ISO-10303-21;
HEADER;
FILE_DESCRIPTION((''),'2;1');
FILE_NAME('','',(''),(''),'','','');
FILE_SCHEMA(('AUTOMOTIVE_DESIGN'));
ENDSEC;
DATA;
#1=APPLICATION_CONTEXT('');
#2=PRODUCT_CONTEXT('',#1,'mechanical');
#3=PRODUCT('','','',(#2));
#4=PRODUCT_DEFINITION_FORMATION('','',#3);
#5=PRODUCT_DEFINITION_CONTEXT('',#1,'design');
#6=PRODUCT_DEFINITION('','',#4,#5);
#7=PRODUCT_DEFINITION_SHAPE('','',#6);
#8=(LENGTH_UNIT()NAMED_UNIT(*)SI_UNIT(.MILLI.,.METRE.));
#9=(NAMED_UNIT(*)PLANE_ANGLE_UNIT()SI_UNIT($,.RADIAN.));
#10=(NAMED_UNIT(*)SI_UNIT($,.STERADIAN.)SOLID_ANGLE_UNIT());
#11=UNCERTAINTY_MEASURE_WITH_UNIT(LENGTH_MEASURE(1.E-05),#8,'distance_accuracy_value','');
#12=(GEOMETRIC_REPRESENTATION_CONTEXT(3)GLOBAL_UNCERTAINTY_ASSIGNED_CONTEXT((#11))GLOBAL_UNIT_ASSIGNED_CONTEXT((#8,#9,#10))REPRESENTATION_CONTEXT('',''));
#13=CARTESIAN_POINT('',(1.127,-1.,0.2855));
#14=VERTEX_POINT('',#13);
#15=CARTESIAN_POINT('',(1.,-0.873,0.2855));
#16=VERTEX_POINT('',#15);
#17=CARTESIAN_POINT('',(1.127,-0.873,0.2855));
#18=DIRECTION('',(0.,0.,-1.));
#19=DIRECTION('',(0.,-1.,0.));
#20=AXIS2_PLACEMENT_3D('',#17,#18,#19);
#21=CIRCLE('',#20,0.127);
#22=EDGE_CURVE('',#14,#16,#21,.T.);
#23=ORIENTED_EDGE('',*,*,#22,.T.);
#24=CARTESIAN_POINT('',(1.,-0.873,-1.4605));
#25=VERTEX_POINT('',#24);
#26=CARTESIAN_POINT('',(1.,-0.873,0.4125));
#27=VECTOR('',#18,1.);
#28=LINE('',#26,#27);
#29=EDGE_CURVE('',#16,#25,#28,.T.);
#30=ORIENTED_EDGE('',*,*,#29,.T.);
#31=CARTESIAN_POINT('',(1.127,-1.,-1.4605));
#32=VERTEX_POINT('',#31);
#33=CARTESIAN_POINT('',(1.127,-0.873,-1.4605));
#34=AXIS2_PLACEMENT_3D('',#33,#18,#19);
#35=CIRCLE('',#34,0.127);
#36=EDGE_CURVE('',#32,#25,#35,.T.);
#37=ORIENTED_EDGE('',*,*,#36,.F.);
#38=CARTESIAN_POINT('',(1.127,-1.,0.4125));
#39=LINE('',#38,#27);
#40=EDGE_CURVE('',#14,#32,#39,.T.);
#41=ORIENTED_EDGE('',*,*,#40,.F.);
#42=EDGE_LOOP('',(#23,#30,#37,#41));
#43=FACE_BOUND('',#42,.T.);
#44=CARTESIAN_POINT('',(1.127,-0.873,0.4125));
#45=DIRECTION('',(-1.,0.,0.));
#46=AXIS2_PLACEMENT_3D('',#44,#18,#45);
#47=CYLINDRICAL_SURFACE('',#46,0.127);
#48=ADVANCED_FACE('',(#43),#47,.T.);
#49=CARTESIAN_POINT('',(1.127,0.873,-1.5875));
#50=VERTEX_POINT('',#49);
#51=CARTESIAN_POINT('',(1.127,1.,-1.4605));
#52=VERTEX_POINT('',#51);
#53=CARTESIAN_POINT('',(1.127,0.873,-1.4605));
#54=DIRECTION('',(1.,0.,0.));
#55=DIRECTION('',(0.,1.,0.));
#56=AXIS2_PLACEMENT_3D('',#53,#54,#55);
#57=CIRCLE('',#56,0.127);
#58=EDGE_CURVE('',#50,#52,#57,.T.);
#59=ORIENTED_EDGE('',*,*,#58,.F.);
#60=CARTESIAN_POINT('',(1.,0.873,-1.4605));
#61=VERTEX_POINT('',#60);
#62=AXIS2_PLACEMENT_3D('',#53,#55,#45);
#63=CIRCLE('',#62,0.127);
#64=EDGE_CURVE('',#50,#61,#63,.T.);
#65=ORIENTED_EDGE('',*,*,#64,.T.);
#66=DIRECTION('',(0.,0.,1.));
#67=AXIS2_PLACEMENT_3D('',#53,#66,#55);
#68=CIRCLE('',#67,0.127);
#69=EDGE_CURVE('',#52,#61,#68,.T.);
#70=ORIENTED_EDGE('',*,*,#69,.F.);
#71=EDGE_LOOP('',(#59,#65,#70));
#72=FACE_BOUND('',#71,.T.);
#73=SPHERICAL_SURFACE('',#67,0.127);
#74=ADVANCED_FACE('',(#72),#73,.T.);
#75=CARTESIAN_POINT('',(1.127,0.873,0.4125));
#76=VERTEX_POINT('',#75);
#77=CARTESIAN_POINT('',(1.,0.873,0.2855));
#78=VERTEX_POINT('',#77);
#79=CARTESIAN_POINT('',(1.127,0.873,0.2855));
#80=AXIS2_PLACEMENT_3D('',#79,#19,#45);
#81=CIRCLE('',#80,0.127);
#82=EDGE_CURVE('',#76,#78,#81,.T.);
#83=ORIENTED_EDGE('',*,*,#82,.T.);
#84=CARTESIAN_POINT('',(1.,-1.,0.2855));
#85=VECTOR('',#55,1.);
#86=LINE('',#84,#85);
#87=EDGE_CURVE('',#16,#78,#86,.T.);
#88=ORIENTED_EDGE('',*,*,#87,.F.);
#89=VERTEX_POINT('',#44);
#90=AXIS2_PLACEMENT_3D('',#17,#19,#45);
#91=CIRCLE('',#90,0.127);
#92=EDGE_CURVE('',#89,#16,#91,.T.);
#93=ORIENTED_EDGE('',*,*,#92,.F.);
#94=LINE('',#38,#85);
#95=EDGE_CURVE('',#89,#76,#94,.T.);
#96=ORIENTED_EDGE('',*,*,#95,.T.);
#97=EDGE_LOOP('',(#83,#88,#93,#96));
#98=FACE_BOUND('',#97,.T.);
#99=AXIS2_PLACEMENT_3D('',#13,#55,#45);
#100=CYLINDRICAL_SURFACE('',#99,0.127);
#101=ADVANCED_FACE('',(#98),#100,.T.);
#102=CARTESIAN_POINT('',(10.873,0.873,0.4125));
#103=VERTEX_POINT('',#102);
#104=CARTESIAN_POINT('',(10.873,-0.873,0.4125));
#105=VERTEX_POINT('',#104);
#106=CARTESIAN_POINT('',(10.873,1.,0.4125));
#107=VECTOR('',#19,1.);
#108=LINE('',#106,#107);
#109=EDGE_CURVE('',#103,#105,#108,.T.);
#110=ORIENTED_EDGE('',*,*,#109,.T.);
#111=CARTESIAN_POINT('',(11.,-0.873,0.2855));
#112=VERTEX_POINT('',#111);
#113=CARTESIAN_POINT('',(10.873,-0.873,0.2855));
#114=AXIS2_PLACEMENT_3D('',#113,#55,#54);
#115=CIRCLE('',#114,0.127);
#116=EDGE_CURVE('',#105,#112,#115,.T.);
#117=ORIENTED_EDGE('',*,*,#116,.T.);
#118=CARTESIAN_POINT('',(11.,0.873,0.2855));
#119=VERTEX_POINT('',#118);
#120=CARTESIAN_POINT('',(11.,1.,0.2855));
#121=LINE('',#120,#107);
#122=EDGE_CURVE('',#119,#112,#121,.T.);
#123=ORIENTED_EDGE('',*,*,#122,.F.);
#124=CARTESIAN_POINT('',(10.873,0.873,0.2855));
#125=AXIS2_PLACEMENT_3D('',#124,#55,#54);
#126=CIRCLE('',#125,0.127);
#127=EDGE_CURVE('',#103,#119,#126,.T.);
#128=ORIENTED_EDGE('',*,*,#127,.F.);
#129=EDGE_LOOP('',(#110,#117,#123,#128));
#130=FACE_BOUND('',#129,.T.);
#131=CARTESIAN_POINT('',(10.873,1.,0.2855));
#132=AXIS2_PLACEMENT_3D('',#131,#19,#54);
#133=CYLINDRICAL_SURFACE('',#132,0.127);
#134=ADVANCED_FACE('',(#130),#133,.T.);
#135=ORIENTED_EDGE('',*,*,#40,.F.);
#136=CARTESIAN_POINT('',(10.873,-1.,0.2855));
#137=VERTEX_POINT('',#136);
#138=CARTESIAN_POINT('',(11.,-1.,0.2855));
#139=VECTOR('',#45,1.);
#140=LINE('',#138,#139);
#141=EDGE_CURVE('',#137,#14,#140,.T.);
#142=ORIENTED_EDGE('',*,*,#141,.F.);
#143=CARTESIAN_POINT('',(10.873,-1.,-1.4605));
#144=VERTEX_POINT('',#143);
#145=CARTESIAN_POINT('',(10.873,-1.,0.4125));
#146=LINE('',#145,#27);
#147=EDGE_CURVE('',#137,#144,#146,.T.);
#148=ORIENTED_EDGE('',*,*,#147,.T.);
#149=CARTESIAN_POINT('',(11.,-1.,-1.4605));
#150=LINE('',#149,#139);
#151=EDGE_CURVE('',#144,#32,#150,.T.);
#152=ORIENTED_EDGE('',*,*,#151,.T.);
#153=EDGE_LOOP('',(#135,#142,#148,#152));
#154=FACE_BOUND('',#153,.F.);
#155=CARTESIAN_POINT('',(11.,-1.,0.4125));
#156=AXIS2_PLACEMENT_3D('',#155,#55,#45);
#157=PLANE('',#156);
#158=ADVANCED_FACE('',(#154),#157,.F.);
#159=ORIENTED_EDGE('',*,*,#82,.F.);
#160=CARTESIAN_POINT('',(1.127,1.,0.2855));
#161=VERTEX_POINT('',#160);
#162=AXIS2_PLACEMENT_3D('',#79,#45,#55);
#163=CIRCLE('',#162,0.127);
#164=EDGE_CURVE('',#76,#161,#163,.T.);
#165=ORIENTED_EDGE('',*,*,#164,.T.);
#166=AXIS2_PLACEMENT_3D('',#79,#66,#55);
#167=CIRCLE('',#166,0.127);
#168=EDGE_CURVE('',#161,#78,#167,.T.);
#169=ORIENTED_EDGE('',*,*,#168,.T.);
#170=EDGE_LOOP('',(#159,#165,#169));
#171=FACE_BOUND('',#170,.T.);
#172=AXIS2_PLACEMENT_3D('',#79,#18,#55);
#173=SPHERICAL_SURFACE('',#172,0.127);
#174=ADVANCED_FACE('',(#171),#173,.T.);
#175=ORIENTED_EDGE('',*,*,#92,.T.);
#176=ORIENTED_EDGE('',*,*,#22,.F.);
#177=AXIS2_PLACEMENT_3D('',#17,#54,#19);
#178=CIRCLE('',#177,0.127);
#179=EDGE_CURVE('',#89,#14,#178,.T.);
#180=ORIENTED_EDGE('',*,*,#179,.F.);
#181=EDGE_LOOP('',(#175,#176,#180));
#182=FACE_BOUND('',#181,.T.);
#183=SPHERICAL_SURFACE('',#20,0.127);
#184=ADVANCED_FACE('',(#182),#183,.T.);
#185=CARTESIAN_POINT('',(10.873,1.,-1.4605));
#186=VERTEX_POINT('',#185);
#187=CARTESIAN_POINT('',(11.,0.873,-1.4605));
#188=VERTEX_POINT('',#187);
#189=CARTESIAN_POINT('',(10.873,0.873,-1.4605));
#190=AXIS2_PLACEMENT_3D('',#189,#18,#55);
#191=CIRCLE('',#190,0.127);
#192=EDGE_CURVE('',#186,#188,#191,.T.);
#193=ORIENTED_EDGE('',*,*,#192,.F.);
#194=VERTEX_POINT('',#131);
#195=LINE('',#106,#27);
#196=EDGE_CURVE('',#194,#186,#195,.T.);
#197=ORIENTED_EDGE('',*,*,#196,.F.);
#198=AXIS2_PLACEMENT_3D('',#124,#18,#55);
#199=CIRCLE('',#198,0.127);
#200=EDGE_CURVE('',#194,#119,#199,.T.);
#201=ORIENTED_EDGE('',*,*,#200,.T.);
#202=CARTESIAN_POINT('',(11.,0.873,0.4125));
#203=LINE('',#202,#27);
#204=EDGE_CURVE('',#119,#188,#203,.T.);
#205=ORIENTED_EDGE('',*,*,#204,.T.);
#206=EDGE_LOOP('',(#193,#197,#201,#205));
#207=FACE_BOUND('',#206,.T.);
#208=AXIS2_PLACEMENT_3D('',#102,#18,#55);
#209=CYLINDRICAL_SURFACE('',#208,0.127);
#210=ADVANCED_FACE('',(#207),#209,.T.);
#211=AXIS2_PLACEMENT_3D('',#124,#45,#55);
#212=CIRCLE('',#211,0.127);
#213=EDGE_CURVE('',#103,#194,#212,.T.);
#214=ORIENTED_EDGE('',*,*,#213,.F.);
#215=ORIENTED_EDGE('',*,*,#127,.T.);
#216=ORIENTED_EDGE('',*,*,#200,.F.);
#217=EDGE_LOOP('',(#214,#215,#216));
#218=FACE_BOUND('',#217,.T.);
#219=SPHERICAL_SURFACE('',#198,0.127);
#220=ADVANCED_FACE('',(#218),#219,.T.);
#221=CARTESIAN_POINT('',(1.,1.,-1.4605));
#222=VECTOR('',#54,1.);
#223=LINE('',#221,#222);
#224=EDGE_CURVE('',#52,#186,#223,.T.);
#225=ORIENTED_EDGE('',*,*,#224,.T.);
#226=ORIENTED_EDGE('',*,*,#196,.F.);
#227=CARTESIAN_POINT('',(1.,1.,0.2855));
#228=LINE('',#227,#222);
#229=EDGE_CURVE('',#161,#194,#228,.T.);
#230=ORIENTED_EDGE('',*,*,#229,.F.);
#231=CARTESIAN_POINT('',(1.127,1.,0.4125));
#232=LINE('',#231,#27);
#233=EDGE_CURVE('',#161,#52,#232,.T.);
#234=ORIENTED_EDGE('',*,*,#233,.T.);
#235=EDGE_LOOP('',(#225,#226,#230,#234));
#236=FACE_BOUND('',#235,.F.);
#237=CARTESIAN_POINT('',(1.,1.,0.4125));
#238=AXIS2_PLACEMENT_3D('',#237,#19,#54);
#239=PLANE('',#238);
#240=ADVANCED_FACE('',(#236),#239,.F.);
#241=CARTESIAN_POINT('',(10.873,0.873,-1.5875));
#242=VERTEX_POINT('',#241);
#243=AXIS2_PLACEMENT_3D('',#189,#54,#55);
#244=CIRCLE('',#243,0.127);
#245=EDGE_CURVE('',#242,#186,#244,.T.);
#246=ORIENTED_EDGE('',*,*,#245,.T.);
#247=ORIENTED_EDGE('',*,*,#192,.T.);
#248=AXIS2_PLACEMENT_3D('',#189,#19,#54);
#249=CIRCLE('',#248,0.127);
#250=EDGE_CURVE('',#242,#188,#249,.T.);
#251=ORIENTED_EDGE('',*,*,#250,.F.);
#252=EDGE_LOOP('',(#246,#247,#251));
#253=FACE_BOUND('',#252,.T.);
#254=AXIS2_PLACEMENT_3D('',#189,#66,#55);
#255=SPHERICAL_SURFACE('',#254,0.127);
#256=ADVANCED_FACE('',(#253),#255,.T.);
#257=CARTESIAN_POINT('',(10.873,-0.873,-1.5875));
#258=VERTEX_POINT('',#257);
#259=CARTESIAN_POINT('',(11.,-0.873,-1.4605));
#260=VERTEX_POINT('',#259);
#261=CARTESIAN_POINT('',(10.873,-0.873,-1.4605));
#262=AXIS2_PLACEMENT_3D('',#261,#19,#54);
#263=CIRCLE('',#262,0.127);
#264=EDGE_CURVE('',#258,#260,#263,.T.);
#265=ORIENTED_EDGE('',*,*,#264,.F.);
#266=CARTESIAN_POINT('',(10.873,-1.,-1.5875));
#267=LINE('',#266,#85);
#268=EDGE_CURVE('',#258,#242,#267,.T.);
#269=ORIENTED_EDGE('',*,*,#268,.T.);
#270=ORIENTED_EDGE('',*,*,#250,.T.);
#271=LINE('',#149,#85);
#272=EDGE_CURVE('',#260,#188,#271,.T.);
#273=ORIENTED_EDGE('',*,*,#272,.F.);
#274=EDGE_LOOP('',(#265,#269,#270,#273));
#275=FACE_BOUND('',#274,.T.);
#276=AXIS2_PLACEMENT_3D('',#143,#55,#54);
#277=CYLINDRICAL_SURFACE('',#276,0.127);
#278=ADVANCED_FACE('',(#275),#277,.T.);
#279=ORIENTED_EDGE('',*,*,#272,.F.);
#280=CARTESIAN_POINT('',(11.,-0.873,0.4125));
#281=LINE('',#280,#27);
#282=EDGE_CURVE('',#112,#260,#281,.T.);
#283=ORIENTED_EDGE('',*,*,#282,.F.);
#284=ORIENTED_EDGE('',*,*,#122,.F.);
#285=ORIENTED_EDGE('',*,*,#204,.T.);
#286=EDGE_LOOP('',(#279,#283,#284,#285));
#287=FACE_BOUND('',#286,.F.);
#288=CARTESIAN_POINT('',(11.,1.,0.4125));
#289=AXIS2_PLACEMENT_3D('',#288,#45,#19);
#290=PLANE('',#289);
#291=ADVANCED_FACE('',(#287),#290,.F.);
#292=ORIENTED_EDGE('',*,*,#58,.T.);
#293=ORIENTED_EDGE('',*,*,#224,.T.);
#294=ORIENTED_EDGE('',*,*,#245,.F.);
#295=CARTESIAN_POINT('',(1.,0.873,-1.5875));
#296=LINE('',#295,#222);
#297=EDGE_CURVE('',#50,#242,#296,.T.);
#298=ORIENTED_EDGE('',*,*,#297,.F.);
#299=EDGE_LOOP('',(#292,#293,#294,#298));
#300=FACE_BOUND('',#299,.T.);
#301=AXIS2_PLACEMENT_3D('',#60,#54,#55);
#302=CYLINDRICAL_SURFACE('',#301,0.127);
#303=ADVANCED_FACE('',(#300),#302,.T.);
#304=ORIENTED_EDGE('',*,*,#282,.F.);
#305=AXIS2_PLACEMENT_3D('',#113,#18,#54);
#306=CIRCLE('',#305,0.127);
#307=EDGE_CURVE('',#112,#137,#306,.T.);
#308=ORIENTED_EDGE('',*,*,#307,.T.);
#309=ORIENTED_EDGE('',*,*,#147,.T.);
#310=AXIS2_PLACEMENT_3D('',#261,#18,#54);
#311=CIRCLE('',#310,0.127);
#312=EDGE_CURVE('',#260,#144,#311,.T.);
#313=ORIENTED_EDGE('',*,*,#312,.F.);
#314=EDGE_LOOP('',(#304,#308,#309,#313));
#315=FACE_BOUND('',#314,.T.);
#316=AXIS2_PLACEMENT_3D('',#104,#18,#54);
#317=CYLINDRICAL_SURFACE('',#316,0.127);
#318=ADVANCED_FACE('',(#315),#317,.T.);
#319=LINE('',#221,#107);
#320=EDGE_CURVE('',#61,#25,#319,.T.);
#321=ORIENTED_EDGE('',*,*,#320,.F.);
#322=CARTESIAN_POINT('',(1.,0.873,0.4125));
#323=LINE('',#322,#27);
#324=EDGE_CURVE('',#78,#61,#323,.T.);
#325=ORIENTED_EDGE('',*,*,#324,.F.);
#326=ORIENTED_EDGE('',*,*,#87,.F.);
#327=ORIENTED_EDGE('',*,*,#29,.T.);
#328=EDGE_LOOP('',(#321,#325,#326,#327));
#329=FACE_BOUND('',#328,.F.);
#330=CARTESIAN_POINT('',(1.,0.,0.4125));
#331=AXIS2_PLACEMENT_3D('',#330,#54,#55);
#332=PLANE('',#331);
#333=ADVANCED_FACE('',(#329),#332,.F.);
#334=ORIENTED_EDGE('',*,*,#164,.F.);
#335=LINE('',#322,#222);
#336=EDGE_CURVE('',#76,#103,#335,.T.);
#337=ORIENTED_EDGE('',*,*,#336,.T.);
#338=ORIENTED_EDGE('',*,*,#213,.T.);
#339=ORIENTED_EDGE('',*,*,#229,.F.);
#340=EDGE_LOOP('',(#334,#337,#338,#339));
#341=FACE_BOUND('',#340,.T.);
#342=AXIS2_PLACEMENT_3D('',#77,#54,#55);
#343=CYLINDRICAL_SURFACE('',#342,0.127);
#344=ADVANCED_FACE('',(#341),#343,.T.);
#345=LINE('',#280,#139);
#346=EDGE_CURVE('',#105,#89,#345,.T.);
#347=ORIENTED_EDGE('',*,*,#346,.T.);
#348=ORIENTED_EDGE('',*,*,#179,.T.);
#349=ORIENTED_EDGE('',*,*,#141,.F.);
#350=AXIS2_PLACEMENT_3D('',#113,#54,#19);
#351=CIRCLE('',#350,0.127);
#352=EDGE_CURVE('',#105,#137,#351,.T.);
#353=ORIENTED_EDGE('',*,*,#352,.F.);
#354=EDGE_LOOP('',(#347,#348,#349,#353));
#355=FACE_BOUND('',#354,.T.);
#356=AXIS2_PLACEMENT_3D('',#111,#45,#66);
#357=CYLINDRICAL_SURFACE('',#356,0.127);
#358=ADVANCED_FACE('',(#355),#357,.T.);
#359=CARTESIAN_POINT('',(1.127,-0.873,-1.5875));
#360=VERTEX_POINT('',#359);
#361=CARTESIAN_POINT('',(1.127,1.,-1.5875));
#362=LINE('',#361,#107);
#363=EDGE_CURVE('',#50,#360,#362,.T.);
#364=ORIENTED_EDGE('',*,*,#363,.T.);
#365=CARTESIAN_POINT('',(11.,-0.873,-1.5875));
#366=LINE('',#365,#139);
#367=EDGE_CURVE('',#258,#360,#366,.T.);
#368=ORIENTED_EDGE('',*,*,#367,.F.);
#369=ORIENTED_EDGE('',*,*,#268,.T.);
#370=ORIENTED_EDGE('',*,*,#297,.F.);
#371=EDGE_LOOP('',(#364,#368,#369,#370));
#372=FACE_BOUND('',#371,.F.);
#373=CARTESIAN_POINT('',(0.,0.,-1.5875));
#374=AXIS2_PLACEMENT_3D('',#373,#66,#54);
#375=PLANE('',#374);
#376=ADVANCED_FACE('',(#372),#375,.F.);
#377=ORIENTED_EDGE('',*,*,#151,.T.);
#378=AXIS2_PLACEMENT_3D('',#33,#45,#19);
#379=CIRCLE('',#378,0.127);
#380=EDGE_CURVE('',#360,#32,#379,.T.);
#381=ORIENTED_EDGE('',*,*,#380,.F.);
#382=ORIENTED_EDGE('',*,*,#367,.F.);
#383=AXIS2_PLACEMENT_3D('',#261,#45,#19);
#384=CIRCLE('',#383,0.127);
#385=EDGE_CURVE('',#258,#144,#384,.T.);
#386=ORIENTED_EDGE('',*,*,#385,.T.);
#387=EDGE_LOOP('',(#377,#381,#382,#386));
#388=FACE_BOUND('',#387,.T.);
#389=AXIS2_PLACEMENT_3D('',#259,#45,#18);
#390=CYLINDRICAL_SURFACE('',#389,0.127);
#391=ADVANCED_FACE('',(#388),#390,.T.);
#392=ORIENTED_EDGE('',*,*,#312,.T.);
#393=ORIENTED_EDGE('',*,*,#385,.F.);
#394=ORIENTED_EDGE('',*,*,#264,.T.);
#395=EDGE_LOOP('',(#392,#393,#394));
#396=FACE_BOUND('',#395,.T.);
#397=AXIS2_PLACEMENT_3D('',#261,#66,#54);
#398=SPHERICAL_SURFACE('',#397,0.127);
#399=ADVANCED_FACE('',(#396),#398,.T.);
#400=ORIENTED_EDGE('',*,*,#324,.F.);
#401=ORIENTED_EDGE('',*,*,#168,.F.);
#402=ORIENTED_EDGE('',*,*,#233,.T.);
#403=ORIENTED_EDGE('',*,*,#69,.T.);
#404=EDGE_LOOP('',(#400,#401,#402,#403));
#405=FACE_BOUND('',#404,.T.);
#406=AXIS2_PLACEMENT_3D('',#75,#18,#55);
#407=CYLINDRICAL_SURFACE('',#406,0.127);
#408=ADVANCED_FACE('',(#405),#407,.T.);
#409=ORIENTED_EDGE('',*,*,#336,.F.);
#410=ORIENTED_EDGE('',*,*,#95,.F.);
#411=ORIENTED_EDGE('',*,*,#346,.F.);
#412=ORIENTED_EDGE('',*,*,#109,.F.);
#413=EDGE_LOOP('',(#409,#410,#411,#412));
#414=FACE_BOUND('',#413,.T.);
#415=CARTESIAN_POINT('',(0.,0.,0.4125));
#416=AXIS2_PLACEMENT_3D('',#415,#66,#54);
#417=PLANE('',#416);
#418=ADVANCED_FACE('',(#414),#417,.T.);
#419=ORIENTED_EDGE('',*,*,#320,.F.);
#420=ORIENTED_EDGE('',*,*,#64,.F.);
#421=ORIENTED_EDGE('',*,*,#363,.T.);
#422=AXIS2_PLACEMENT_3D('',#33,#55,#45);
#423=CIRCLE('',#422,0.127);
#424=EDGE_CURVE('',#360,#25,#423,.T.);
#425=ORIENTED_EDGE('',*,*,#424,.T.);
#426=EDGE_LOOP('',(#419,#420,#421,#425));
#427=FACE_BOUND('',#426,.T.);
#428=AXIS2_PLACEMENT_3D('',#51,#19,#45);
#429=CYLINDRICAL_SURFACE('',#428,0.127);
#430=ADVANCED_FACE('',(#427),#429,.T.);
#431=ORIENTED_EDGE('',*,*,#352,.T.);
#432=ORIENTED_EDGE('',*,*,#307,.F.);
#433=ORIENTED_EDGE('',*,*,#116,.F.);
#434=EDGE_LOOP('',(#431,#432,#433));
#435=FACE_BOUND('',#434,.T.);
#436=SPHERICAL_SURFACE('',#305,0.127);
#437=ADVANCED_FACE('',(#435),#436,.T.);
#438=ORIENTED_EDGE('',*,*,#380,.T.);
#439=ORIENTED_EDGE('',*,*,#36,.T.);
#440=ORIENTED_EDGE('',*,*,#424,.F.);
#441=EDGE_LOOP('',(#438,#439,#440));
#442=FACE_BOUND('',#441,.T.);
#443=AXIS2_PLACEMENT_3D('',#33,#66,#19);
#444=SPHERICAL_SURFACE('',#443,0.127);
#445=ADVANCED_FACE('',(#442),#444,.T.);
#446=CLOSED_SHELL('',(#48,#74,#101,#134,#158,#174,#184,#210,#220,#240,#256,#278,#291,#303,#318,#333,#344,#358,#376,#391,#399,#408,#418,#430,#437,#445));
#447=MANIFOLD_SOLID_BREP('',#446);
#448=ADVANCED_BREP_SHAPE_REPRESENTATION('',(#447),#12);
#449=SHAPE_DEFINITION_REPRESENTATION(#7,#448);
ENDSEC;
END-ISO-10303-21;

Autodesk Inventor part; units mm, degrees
ref_plane "YZ Plane" through (0, 0, 0) normal (1, 0, 0) x (0, 1, 0)
sketch "Sketch1" plane through (0, 0, 0) normal (0, 0, 1) x (1, 0, 0)
  line L0 (1, 1) -> (11, 1)
  line L1 (11, 1) -> (11, -1)
  line L2 (11, -1) -> (1, -1)
  line L3 (1, -1) -> (1, 1)
  arc A0 (1, 1) -> (1, -1) centre (1, 0) ccw construction
  line L4 (0, 1.4) -> (0, -1.4) projected
  line L5 (-3.756, 0) -> (22.536, 0) projected
  dimension "d0" = 1
  dimension "d1" = 10
ref_plane "IDS_WORKPLANE{1}" through (0, 0, -1.5875) normal (0, 0, 1) x (1, 0, 0)
ref_plane "IDS_WORKPLANE{2}" through (0, 0, 0.4125) normal (0, 0, 1) x (1, 0, 0)
extrude "Body1" add sketch "Sketch1" against normal up to surface (2 mm away) from surface at 0.4125
fillet "Fillet1" radius 0.127 14 edges at (1, 1, -0.5875) (11, 1, -0.5875) (6, 1, 0.4125) (6, 1, -1.5875) (11, -1, -0.5875) (11, 0, 0.4125) (11, 0, -1.5875) (1, -1, -0.5875) (6, -1, 0.4125) (6, -1, -1.5875) (1, -0.5, 0.4125) (1, -0.5, -1.5875) (1, 0.5, 0.4125) (1, 0.5, -1.5875)
equation "\"d0\" = 0.5 * PB"
equation "\"d1\" = NLG"
equation "\"d2\" = -PNT"
equation "\"d3\" = PB - PNT"
equation "\"NLG\" = 10"
equation "\"PB\" = 2"
equation "\"PNT\" = 1.5875"
properties part number "am-1121" material "Steel, Mild"
